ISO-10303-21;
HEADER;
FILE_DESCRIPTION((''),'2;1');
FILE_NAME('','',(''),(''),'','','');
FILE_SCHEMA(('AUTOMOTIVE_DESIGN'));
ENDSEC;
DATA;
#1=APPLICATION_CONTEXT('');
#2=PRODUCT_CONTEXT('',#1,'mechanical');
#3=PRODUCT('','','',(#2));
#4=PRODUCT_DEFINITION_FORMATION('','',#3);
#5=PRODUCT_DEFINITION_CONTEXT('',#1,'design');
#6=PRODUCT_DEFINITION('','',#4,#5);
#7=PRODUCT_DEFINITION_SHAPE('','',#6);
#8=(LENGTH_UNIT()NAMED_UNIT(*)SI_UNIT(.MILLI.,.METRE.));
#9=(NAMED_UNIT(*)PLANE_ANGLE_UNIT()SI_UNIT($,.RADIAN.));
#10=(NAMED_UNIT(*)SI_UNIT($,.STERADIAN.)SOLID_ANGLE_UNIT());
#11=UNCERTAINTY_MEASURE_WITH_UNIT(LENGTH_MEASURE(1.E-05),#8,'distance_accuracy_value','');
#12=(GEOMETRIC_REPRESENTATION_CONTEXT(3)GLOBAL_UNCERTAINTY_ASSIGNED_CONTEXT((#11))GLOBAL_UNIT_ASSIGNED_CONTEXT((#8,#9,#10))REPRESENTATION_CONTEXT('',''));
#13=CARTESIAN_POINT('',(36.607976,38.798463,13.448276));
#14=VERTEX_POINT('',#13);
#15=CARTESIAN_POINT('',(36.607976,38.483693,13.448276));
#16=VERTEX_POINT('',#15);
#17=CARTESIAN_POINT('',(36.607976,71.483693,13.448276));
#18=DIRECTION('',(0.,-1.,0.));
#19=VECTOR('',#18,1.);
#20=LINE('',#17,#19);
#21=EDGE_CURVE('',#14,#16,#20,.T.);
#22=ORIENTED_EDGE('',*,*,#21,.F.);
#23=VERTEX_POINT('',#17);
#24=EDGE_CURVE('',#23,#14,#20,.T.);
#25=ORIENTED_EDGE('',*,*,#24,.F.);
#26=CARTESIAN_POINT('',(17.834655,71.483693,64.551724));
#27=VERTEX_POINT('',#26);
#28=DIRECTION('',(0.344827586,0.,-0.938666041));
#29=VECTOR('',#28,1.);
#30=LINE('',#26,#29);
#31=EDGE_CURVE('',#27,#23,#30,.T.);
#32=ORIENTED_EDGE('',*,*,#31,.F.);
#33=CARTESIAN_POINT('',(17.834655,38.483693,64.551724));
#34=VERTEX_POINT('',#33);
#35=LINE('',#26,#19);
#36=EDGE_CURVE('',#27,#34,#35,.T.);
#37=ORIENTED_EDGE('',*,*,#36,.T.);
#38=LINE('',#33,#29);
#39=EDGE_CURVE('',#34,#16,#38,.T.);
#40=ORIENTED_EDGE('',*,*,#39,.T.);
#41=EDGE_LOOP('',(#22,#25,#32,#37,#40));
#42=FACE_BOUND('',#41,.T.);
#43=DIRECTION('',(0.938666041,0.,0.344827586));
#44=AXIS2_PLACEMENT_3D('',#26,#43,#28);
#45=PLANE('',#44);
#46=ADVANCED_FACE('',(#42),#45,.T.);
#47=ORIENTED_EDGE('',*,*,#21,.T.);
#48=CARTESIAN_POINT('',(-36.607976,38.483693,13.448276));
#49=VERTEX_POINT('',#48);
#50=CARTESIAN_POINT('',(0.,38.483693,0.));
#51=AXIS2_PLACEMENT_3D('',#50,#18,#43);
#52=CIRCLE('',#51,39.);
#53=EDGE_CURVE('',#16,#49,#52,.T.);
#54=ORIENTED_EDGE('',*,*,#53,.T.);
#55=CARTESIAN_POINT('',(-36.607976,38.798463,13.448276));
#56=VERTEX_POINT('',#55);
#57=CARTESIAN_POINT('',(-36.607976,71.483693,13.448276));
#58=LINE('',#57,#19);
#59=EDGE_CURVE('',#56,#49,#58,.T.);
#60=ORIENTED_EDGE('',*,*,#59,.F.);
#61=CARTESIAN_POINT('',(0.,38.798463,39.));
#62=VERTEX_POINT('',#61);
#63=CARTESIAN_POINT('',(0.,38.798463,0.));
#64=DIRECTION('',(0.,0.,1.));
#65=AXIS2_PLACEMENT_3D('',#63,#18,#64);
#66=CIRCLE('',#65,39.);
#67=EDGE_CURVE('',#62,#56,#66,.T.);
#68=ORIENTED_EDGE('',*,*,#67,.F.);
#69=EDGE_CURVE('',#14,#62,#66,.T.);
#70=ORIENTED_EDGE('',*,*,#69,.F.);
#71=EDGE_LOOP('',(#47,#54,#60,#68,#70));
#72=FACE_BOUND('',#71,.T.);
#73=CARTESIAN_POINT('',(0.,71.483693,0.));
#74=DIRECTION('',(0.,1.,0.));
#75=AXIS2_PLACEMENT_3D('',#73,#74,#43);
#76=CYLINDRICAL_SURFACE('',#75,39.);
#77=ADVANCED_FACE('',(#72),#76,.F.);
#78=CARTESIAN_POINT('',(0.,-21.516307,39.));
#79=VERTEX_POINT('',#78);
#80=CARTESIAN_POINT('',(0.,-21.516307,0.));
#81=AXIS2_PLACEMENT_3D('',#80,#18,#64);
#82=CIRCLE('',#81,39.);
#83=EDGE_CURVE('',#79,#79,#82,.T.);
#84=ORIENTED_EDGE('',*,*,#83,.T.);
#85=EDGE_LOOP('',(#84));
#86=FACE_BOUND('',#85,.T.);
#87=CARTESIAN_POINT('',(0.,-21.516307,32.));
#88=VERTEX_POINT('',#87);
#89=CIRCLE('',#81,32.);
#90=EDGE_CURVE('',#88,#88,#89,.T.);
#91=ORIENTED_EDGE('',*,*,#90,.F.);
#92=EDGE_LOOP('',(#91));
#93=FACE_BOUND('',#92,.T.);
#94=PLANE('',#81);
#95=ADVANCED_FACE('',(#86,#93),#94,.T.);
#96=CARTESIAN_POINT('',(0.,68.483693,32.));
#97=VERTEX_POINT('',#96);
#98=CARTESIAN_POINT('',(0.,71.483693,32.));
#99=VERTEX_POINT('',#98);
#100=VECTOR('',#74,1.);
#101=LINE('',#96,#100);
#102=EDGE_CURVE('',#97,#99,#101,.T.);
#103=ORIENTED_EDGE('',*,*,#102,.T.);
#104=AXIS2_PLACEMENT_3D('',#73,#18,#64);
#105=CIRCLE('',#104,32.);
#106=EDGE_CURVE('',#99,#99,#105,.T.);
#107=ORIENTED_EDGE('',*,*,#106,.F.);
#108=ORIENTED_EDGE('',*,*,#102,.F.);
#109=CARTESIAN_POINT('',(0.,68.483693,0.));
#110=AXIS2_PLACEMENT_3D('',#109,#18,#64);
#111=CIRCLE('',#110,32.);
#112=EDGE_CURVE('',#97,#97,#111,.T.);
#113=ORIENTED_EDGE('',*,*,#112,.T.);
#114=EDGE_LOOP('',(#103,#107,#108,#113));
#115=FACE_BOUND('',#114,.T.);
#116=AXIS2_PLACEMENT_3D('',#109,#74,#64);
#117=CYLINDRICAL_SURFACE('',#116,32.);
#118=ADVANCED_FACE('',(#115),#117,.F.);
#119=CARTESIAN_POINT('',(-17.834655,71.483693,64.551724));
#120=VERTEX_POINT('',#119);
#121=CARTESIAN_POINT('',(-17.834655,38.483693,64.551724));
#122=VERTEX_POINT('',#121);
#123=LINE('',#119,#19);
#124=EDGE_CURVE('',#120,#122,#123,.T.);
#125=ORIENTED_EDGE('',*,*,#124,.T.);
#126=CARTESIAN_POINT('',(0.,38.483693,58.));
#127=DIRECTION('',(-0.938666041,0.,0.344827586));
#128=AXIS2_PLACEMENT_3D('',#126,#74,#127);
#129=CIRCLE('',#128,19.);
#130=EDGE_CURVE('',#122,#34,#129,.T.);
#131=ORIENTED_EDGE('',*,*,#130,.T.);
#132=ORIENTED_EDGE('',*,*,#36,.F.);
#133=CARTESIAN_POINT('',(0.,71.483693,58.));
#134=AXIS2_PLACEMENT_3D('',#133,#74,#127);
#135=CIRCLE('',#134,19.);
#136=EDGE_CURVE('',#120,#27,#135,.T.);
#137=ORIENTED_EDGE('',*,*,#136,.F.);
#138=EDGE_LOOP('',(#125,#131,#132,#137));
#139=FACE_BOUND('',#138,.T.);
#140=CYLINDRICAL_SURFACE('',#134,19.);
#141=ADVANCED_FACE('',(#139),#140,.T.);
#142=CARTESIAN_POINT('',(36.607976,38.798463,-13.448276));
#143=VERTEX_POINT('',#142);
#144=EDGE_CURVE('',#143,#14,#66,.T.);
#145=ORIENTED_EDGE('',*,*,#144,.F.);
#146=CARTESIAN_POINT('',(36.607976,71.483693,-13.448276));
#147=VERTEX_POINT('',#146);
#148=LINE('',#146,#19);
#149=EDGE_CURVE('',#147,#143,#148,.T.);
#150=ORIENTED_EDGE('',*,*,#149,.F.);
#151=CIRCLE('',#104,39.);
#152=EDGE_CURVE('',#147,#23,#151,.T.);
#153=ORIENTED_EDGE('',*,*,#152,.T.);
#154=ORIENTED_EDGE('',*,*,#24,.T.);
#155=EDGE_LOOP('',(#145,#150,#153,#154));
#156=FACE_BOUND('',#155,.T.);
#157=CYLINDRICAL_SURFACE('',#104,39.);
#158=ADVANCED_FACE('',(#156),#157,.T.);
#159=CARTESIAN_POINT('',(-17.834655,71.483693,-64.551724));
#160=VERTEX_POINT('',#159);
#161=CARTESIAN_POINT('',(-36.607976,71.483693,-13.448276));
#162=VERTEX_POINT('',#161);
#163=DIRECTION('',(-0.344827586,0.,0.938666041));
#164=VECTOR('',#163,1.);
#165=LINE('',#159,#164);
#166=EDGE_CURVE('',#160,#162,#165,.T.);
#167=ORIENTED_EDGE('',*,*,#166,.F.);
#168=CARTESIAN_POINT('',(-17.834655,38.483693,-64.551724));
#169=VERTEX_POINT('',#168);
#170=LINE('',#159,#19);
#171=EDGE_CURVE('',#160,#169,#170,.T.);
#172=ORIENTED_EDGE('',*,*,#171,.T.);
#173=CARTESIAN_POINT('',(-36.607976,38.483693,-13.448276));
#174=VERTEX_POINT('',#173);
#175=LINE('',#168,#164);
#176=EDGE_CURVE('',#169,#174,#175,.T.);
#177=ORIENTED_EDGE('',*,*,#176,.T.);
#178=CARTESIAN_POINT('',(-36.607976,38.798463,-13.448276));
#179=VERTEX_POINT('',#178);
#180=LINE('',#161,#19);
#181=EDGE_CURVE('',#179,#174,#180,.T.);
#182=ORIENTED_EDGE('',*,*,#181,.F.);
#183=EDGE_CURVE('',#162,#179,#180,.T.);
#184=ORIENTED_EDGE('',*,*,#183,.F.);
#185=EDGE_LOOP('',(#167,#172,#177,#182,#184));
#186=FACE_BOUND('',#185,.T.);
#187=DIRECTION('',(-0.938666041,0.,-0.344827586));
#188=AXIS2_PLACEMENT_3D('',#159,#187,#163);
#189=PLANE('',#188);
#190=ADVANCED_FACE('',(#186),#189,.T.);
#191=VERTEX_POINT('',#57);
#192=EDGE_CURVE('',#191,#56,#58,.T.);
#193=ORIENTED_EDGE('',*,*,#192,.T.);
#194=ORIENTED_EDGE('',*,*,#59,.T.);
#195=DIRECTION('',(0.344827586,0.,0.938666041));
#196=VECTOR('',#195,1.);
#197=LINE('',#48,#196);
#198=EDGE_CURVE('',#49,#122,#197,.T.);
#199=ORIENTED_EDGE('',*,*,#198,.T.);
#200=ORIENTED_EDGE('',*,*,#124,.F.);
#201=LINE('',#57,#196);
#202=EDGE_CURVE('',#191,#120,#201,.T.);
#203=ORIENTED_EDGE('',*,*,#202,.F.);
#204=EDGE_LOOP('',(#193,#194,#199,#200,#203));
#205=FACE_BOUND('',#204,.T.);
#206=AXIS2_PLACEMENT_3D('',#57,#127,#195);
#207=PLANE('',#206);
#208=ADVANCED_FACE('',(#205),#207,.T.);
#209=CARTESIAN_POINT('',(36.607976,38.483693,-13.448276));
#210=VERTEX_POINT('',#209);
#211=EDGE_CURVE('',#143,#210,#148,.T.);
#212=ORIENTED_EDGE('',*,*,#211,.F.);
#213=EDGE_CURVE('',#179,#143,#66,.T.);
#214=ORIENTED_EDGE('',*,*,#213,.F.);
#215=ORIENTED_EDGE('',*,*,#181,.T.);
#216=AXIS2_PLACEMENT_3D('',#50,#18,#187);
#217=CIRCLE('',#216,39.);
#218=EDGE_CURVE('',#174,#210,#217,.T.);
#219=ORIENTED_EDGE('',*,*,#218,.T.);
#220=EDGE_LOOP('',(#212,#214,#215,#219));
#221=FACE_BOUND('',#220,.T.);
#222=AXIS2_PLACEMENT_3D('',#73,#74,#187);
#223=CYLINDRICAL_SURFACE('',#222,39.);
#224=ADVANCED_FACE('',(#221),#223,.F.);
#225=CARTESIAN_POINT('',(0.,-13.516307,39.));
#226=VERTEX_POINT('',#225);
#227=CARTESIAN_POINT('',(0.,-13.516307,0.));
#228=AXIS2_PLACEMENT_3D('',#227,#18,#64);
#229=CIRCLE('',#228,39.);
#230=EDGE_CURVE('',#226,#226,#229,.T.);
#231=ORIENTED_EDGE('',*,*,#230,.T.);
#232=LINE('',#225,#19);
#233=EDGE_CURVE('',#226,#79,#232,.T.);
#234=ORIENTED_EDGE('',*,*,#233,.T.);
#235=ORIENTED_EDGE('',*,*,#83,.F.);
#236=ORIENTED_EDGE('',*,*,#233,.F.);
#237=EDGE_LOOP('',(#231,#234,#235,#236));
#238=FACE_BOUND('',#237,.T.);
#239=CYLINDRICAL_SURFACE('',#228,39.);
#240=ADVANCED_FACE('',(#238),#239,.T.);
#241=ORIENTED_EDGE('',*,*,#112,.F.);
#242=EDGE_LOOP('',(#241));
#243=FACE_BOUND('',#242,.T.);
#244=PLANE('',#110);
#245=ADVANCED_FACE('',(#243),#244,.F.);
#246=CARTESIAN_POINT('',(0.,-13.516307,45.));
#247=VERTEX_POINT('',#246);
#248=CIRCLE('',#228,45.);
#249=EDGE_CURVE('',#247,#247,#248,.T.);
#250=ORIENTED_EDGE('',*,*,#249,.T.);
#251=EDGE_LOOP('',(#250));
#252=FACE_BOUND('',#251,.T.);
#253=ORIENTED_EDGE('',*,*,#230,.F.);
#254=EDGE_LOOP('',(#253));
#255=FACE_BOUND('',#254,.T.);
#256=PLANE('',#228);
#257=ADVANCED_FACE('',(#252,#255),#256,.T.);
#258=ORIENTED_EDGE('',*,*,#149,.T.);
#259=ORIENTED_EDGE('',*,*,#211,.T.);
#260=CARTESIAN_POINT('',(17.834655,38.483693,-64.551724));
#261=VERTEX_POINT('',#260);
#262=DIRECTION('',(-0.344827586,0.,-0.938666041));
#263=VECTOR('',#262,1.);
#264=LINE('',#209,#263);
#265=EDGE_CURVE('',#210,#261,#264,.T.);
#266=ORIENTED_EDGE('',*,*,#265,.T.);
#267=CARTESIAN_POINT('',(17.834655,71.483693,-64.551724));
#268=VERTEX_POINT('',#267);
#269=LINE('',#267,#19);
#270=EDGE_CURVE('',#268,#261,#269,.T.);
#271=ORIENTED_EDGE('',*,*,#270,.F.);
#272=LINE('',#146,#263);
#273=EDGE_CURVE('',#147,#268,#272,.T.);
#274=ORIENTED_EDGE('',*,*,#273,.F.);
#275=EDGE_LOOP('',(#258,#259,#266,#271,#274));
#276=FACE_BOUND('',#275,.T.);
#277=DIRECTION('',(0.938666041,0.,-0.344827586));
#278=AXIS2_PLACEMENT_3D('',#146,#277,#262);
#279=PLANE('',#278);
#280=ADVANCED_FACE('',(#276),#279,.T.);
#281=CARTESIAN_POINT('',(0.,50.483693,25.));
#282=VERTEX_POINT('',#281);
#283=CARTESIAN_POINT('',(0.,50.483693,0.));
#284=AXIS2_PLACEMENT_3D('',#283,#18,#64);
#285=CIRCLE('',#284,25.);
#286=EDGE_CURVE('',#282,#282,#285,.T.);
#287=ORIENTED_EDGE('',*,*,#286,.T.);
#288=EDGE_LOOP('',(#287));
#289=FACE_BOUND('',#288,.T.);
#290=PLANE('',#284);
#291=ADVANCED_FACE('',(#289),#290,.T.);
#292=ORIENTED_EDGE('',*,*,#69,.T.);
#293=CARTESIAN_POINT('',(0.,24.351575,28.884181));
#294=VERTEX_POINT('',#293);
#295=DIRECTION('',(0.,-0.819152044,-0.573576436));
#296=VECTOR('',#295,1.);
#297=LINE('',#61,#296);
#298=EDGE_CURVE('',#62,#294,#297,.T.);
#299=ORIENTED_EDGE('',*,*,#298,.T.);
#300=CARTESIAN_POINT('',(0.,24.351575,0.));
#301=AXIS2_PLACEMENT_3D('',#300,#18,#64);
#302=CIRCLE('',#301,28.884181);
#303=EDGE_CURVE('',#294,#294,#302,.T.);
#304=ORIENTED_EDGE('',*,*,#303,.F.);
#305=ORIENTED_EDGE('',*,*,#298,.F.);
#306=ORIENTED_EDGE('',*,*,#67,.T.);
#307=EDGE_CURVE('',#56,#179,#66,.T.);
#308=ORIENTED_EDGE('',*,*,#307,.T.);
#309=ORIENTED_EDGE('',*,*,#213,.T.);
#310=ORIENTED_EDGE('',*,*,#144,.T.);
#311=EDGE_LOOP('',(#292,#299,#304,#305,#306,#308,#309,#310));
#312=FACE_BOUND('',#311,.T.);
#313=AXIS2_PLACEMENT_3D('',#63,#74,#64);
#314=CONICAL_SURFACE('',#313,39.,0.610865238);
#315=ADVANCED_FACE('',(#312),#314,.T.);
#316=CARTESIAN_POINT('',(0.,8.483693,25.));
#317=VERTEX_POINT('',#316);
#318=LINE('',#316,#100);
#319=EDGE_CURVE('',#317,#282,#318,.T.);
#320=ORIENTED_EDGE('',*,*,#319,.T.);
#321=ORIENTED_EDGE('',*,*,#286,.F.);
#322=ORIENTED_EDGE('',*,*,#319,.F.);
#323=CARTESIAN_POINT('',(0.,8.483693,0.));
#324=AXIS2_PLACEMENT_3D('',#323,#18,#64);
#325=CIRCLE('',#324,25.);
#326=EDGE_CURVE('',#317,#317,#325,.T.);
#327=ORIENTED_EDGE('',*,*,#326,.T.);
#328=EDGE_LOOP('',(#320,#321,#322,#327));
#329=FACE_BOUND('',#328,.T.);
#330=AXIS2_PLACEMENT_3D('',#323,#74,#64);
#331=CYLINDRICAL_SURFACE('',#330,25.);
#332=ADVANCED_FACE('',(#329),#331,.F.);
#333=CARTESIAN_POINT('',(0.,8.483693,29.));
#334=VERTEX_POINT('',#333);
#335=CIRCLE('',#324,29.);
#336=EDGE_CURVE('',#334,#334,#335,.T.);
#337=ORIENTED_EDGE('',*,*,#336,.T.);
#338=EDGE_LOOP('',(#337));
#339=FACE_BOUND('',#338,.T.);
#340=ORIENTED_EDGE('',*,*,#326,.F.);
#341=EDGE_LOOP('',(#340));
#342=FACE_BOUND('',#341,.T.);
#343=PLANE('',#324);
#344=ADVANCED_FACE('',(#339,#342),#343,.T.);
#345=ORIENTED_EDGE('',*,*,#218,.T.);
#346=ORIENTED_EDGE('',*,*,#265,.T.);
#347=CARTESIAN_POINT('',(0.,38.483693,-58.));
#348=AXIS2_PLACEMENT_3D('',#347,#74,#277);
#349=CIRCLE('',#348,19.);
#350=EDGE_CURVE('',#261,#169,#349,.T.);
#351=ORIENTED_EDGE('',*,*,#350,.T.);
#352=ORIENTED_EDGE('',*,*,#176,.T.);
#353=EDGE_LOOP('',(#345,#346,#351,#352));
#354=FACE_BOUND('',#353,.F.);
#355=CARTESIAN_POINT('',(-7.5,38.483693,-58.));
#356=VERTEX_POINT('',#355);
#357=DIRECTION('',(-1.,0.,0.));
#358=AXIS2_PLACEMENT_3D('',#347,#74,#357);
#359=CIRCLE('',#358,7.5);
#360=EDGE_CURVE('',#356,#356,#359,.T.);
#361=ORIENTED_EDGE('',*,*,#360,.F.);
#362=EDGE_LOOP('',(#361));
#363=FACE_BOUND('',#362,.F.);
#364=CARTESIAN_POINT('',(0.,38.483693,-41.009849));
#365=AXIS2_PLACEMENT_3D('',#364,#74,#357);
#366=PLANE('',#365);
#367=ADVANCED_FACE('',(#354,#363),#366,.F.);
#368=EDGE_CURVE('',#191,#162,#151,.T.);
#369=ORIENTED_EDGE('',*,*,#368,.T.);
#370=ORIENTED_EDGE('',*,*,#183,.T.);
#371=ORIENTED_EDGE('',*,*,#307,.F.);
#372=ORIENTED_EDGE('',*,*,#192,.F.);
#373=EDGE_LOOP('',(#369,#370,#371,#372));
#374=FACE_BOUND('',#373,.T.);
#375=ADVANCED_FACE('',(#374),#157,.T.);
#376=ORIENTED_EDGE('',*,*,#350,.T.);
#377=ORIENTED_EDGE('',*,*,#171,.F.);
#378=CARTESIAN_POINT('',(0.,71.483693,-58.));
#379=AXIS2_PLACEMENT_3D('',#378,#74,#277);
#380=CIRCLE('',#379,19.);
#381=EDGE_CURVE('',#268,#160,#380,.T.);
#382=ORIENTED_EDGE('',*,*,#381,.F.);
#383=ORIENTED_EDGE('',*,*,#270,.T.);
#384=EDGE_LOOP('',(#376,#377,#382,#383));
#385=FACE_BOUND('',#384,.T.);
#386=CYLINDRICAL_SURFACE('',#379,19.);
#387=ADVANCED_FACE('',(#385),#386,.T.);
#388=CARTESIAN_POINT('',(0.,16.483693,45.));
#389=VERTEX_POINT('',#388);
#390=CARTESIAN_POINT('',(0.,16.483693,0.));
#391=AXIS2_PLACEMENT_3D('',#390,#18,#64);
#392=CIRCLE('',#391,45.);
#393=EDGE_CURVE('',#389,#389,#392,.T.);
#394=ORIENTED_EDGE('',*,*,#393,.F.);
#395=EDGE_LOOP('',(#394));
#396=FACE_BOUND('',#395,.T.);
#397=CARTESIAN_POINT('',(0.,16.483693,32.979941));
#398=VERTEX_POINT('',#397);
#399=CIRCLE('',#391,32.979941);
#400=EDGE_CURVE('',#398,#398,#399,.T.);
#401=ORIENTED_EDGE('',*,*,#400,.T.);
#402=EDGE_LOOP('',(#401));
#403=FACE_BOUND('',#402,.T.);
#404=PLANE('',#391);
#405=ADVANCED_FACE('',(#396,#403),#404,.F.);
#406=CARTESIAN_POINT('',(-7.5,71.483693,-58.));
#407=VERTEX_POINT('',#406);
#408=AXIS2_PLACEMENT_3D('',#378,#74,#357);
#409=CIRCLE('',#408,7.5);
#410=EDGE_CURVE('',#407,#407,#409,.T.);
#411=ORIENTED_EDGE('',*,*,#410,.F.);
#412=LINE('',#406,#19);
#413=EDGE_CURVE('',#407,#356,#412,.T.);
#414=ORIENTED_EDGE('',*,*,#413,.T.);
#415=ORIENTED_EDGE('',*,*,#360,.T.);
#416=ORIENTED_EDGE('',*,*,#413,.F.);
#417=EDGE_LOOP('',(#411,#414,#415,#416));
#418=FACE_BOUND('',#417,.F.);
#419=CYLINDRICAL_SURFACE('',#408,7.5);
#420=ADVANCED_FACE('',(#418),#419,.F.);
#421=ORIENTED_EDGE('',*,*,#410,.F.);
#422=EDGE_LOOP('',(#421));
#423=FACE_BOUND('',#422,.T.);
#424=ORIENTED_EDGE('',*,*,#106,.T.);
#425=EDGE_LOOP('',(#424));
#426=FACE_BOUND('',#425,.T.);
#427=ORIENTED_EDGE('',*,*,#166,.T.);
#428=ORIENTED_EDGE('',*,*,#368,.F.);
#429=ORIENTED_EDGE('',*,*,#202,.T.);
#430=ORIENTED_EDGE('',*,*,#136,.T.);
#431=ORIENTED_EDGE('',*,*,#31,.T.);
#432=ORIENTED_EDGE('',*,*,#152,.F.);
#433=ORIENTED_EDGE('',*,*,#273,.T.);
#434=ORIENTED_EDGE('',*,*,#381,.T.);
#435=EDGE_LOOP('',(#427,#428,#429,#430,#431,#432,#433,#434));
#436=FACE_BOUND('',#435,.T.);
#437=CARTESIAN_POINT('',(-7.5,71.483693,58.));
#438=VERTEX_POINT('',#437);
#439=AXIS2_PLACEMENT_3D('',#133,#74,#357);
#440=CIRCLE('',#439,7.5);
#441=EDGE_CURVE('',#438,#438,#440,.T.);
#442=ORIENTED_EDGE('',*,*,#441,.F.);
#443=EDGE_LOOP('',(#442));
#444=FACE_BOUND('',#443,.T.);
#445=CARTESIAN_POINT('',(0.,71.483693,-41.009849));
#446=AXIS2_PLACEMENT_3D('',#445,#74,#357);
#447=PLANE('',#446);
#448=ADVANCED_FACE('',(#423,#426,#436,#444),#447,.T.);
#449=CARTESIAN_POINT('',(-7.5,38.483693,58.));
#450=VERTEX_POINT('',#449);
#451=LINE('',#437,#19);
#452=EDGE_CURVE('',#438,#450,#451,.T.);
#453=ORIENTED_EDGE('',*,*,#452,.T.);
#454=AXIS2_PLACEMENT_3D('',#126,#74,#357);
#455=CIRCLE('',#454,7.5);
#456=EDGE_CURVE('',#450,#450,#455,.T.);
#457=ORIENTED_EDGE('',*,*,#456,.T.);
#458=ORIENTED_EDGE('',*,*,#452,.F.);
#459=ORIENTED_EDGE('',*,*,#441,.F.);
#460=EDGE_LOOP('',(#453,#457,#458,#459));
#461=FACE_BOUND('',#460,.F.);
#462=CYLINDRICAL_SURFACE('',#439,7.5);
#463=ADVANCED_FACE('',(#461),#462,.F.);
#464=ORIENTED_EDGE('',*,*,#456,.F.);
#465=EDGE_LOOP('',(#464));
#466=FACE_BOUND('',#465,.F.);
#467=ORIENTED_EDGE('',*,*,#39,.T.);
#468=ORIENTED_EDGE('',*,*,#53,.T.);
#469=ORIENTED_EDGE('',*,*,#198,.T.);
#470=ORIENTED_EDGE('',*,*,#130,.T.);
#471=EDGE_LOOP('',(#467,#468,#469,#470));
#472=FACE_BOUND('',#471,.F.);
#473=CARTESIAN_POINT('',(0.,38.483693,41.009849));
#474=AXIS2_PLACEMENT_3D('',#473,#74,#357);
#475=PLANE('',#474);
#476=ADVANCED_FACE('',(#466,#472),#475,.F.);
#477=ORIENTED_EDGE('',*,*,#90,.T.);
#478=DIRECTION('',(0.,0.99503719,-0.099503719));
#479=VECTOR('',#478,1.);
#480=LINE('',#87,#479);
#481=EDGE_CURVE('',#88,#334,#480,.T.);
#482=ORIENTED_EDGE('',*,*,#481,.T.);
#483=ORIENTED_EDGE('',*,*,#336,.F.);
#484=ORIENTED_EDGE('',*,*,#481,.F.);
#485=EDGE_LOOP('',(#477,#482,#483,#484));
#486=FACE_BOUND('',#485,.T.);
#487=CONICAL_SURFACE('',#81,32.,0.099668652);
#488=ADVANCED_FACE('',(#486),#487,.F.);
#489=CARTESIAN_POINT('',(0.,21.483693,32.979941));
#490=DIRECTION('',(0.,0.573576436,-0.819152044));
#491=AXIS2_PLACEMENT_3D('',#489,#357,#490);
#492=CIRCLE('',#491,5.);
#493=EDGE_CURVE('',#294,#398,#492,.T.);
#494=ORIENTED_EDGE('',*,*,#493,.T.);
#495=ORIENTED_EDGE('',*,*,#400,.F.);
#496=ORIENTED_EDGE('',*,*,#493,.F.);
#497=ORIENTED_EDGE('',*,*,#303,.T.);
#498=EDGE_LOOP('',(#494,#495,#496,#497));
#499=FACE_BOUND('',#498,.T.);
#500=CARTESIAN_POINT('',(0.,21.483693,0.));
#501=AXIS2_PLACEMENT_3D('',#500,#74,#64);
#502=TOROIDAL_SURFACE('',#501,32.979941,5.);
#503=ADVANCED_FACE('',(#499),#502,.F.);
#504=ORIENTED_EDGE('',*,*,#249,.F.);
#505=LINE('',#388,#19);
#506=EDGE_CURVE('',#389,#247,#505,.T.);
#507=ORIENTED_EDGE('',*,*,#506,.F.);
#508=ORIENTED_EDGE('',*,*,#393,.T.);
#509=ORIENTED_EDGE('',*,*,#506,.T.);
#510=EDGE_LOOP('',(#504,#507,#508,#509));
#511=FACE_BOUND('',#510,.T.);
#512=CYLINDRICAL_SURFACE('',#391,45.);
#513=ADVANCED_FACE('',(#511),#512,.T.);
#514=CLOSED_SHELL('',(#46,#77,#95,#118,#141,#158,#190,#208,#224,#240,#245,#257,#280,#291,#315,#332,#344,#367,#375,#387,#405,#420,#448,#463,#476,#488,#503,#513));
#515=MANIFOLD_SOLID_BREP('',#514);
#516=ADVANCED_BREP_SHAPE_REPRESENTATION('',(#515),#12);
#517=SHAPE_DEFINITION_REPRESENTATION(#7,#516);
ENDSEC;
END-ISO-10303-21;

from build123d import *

# Parameters (mm, degrees)
F2_R     = 7.5
F4_DEPTH = 33


# Not quite as in the source:
# - a feature of the source that left no trace in its solid (it failed there, or was rolled back) is left out


with BuildPart() as f1:
    # F0 (on Right) → F1 (revolve)
    with BuildSketch(Plane.YZ):
        with BuildLine():
            Line((-13.5163067589, 39), (-21.5163067589, 39))
            Line((-21.5163067589, 39), (-21.5163067589, 32))
            Line((-21.5163067589, 32), (8.4836932411, 29))
            Line((8.4836932411, 29), (8.4836932411, 25))
            Line((8.4836932411, 25), (50.4836932411, 25))
            Line((50.4836932411, 25), (50.4836932411, 0))
            Line((50.4836932411, 0), (68.4836932411, 0))
            Line((68.4836932411, 0), (68.4836932411, 32))
            Line((68.4836932411, 32), (71.4836932411, 32))
            Line((71.4836932411, 32), (71.4836932411, 39))
            Line((71.4836932411, 39), (38.7984625995, 39))
            Line((38.7984625995, 39), (24.3515754229, 28.8841806952))
            ThreePointArc((24.3515754229, 28.8841806952), (19.1749501749, 28.5448867508), (16.4836932411, 32.9799409167))
            Line((16.4836932411, 32.9799409167), (16.4836932411, 45))
            Line((16.4836932411, 45), (-13.5163067589, 45))
            Line((-13.5163067589, 45), (-13.5163067589, 39))
        make_face()
    revolve(axis=Axis((0, 59.4836932411, 0), (0, -1, 0)))

    # F2 (on face) → F4 (join)
    with BuildSketch(Plane(origin=(0, 71.4836932411, 0), x_dir=(-1, 0, 0), z_dir=(0, 1, 0))):
        with BuildLine():
            ThreePointArc((36.6079755837, -13.4482758621), (0, -39), (-36.6079755837, -13.4482758621))
            Line((-36.6079755837, -13.4482758621), (-17.8346547716, -64.5517241379))
            ThreePointArc((-17.8346547716, -64.5517241379), (0, -77), (17.8346547716, -64.5517241379))
            Line((17.8346547716, -64.5517241379), (36.6079755837, -13.4482758621))
        make_face()
        with Locations((0, -58)):
            Circle(F2_R, mode=Mode.SUBTRACT)
        with BuildLine():
            ThreePointArc((17.8346547716, 64.5517241379), (0, 77), (-17.8346547716, 64.5517241379))
            Line((-17.8346547716, 64.5517241379), (-36.6079755837, 13.4482758621))
            ThreePointArc((-36.6079755837, 13.4482758621), (0, 39), (36.6079755837, 13.4482758621))
            Line((36.6079755837, 13.4482758621), (17.8346547716, 64.5517241379))
        make_face()
        with Locations((0, 58)):
            Circle(F2_R, mode=Mode.SUBTRACT)
    extrude(amount=-F4_DEPTH)


solid = f1.part
